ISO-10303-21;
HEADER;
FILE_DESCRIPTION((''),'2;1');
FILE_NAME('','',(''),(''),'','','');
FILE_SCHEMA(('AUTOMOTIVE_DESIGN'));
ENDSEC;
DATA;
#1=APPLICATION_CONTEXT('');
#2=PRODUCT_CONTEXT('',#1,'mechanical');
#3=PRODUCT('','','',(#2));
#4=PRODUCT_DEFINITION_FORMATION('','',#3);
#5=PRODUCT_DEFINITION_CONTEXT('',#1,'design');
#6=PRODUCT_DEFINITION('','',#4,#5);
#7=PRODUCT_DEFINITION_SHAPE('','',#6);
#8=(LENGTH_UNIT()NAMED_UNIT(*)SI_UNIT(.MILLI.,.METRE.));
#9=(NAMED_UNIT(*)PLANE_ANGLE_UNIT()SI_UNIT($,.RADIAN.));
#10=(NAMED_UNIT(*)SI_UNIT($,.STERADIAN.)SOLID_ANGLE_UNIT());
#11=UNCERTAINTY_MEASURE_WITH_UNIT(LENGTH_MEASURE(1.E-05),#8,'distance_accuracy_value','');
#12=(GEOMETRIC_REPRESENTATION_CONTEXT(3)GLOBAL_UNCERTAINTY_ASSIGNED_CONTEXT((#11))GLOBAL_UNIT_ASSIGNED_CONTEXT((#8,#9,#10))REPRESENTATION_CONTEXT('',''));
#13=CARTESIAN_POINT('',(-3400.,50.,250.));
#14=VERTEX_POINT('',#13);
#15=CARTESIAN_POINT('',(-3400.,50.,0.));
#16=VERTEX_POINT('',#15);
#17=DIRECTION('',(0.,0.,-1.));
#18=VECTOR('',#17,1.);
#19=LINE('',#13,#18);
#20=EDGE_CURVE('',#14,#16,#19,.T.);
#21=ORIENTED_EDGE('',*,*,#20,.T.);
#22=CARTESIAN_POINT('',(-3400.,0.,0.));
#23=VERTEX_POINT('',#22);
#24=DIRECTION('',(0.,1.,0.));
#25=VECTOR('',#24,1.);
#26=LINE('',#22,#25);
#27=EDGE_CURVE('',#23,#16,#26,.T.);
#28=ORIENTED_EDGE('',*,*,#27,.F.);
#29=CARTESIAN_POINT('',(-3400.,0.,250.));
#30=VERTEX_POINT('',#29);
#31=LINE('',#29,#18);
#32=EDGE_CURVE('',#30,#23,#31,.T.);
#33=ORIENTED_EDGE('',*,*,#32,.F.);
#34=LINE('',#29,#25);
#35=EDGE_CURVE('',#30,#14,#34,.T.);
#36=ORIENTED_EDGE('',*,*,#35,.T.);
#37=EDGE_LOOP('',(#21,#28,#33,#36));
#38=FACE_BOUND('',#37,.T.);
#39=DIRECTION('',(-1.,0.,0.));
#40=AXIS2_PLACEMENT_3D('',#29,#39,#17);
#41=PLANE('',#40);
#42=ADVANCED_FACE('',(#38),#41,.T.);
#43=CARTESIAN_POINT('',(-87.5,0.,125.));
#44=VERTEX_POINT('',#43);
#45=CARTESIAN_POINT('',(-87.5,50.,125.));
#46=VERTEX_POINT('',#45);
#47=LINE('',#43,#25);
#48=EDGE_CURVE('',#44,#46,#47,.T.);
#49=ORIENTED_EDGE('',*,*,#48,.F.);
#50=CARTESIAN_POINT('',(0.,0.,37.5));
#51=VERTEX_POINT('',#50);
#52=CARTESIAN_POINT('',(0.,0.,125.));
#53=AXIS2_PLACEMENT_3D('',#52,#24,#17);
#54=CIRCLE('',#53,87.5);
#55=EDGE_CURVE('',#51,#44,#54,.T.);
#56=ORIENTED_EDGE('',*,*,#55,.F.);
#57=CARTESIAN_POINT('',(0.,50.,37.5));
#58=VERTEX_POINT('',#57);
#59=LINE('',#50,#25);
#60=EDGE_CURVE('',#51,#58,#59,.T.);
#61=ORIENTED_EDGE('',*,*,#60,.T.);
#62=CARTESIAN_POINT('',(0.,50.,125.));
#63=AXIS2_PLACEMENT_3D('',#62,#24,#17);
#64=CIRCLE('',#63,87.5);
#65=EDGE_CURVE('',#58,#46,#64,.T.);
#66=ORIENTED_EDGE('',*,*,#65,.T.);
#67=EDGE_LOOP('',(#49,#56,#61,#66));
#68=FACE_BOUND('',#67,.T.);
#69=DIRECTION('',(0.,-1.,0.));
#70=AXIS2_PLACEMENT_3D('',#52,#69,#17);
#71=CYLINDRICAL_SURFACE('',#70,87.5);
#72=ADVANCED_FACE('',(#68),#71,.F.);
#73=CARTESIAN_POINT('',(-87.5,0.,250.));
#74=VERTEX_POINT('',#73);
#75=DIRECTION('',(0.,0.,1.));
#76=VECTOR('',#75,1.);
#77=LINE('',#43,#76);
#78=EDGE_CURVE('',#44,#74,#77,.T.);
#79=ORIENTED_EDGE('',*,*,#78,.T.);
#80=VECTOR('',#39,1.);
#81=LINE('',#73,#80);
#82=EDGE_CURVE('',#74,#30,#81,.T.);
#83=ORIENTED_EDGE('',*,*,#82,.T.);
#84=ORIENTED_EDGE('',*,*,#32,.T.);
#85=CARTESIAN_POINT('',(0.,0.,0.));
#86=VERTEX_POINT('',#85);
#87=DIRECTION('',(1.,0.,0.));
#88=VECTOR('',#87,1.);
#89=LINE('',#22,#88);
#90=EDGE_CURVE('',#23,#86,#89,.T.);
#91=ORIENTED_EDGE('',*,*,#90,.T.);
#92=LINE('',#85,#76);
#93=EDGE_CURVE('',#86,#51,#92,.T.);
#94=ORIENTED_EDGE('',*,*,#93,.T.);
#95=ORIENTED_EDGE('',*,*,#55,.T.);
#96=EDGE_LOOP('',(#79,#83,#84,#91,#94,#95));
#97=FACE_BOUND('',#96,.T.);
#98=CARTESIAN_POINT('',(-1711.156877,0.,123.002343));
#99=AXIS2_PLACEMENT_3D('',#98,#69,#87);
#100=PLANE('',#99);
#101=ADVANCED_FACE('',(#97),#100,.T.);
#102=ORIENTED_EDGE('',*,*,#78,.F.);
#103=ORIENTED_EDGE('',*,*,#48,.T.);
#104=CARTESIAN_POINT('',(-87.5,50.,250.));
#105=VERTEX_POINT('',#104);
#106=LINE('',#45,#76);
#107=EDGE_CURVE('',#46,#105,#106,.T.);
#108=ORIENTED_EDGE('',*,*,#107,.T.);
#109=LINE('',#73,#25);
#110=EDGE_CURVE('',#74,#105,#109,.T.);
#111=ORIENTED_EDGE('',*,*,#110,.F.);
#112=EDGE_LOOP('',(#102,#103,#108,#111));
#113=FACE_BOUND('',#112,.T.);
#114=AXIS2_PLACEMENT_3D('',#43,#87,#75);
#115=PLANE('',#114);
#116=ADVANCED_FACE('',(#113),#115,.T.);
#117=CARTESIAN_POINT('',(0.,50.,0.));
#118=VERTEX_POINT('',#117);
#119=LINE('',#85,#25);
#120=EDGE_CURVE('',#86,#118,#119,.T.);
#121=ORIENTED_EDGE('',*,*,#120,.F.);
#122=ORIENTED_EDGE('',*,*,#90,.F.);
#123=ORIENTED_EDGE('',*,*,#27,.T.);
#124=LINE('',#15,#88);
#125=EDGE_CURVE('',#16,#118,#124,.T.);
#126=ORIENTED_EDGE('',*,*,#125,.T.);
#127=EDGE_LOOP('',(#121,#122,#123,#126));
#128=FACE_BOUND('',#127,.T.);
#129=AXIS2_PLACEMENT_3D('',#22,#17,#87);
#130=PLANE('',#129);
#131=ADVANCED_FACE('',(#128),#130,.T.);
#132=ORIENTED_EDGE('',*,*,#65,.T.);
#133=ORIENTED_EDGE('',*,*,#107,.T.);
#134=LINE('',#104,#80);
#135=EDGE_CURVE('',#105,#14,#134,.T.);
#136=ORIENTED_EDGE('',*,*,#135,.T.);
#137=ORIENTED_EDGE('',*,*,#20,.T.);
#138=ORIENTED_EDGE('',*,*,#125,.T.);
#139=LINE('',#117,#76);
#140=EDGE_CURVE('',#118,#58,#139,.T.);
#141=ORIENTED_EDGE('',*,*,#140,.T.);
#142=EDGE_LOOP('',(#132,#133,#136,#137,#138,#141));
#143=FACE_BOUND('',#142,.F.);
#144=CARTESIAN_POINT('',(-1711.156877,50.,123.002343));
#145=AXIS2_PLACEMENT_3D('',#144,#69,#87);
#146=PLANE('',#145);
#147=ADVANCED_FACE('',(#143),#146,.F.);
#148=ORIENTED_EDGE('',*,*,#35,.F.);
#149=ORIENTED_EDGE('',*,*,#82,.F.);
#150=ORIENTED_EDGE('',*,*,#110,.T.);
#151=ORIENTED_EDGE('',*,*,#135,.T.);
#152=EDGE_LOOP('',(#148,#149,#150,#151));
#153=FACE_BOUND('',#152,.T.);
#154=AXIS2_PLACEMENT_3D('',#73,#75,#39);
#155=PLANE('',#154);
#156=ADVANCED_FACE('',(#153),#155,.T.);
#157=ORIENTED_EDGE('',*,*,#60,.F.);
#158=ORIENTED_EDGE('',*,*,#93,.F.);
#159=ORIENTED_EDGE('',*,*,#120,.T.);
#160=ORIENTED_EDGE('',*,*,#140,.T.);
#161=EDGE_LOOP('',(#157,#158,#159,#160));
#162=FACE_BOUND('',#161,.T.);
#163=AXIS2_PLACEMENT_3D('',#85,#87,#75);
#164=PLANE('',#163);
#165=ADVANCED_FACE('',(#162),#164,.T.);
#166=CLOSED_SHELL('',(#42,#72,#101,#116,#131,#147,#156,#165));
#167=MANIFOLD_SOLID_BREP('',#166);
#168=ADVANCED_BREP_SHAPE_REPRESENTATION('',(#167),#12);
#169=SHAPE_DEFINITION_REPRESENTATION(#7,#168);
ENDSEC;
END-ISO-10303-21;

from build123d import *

# Parameters (mm, degrees)
F1_DEPTH = 50


# Not quite as in the source:
# - a feature of the source that left no trace in its solid (it failed there, or was rolled back) is left out


with BuildPart() as f1:
    # F0 (on Front) → F1 (new body)
    with BuildSketch(Plane.XZ):
        with BuildLine():
            Line((-3400, 0), (0, 0))
            Line((0, 0), (0, 37.5))
            ThreePointArc((0, 37.5), (-61.8718433538, 63.1281566462), (-87.5, 125))
            Line((-87.5, 125), (-87.5, 250))
            Line((-87.5, 250), (-3400, 250))
            Line((-3400, 250), (-3400, 0))
        make_face()
    extrude(amount=-F1_DEPTH)


solid = f1.part
